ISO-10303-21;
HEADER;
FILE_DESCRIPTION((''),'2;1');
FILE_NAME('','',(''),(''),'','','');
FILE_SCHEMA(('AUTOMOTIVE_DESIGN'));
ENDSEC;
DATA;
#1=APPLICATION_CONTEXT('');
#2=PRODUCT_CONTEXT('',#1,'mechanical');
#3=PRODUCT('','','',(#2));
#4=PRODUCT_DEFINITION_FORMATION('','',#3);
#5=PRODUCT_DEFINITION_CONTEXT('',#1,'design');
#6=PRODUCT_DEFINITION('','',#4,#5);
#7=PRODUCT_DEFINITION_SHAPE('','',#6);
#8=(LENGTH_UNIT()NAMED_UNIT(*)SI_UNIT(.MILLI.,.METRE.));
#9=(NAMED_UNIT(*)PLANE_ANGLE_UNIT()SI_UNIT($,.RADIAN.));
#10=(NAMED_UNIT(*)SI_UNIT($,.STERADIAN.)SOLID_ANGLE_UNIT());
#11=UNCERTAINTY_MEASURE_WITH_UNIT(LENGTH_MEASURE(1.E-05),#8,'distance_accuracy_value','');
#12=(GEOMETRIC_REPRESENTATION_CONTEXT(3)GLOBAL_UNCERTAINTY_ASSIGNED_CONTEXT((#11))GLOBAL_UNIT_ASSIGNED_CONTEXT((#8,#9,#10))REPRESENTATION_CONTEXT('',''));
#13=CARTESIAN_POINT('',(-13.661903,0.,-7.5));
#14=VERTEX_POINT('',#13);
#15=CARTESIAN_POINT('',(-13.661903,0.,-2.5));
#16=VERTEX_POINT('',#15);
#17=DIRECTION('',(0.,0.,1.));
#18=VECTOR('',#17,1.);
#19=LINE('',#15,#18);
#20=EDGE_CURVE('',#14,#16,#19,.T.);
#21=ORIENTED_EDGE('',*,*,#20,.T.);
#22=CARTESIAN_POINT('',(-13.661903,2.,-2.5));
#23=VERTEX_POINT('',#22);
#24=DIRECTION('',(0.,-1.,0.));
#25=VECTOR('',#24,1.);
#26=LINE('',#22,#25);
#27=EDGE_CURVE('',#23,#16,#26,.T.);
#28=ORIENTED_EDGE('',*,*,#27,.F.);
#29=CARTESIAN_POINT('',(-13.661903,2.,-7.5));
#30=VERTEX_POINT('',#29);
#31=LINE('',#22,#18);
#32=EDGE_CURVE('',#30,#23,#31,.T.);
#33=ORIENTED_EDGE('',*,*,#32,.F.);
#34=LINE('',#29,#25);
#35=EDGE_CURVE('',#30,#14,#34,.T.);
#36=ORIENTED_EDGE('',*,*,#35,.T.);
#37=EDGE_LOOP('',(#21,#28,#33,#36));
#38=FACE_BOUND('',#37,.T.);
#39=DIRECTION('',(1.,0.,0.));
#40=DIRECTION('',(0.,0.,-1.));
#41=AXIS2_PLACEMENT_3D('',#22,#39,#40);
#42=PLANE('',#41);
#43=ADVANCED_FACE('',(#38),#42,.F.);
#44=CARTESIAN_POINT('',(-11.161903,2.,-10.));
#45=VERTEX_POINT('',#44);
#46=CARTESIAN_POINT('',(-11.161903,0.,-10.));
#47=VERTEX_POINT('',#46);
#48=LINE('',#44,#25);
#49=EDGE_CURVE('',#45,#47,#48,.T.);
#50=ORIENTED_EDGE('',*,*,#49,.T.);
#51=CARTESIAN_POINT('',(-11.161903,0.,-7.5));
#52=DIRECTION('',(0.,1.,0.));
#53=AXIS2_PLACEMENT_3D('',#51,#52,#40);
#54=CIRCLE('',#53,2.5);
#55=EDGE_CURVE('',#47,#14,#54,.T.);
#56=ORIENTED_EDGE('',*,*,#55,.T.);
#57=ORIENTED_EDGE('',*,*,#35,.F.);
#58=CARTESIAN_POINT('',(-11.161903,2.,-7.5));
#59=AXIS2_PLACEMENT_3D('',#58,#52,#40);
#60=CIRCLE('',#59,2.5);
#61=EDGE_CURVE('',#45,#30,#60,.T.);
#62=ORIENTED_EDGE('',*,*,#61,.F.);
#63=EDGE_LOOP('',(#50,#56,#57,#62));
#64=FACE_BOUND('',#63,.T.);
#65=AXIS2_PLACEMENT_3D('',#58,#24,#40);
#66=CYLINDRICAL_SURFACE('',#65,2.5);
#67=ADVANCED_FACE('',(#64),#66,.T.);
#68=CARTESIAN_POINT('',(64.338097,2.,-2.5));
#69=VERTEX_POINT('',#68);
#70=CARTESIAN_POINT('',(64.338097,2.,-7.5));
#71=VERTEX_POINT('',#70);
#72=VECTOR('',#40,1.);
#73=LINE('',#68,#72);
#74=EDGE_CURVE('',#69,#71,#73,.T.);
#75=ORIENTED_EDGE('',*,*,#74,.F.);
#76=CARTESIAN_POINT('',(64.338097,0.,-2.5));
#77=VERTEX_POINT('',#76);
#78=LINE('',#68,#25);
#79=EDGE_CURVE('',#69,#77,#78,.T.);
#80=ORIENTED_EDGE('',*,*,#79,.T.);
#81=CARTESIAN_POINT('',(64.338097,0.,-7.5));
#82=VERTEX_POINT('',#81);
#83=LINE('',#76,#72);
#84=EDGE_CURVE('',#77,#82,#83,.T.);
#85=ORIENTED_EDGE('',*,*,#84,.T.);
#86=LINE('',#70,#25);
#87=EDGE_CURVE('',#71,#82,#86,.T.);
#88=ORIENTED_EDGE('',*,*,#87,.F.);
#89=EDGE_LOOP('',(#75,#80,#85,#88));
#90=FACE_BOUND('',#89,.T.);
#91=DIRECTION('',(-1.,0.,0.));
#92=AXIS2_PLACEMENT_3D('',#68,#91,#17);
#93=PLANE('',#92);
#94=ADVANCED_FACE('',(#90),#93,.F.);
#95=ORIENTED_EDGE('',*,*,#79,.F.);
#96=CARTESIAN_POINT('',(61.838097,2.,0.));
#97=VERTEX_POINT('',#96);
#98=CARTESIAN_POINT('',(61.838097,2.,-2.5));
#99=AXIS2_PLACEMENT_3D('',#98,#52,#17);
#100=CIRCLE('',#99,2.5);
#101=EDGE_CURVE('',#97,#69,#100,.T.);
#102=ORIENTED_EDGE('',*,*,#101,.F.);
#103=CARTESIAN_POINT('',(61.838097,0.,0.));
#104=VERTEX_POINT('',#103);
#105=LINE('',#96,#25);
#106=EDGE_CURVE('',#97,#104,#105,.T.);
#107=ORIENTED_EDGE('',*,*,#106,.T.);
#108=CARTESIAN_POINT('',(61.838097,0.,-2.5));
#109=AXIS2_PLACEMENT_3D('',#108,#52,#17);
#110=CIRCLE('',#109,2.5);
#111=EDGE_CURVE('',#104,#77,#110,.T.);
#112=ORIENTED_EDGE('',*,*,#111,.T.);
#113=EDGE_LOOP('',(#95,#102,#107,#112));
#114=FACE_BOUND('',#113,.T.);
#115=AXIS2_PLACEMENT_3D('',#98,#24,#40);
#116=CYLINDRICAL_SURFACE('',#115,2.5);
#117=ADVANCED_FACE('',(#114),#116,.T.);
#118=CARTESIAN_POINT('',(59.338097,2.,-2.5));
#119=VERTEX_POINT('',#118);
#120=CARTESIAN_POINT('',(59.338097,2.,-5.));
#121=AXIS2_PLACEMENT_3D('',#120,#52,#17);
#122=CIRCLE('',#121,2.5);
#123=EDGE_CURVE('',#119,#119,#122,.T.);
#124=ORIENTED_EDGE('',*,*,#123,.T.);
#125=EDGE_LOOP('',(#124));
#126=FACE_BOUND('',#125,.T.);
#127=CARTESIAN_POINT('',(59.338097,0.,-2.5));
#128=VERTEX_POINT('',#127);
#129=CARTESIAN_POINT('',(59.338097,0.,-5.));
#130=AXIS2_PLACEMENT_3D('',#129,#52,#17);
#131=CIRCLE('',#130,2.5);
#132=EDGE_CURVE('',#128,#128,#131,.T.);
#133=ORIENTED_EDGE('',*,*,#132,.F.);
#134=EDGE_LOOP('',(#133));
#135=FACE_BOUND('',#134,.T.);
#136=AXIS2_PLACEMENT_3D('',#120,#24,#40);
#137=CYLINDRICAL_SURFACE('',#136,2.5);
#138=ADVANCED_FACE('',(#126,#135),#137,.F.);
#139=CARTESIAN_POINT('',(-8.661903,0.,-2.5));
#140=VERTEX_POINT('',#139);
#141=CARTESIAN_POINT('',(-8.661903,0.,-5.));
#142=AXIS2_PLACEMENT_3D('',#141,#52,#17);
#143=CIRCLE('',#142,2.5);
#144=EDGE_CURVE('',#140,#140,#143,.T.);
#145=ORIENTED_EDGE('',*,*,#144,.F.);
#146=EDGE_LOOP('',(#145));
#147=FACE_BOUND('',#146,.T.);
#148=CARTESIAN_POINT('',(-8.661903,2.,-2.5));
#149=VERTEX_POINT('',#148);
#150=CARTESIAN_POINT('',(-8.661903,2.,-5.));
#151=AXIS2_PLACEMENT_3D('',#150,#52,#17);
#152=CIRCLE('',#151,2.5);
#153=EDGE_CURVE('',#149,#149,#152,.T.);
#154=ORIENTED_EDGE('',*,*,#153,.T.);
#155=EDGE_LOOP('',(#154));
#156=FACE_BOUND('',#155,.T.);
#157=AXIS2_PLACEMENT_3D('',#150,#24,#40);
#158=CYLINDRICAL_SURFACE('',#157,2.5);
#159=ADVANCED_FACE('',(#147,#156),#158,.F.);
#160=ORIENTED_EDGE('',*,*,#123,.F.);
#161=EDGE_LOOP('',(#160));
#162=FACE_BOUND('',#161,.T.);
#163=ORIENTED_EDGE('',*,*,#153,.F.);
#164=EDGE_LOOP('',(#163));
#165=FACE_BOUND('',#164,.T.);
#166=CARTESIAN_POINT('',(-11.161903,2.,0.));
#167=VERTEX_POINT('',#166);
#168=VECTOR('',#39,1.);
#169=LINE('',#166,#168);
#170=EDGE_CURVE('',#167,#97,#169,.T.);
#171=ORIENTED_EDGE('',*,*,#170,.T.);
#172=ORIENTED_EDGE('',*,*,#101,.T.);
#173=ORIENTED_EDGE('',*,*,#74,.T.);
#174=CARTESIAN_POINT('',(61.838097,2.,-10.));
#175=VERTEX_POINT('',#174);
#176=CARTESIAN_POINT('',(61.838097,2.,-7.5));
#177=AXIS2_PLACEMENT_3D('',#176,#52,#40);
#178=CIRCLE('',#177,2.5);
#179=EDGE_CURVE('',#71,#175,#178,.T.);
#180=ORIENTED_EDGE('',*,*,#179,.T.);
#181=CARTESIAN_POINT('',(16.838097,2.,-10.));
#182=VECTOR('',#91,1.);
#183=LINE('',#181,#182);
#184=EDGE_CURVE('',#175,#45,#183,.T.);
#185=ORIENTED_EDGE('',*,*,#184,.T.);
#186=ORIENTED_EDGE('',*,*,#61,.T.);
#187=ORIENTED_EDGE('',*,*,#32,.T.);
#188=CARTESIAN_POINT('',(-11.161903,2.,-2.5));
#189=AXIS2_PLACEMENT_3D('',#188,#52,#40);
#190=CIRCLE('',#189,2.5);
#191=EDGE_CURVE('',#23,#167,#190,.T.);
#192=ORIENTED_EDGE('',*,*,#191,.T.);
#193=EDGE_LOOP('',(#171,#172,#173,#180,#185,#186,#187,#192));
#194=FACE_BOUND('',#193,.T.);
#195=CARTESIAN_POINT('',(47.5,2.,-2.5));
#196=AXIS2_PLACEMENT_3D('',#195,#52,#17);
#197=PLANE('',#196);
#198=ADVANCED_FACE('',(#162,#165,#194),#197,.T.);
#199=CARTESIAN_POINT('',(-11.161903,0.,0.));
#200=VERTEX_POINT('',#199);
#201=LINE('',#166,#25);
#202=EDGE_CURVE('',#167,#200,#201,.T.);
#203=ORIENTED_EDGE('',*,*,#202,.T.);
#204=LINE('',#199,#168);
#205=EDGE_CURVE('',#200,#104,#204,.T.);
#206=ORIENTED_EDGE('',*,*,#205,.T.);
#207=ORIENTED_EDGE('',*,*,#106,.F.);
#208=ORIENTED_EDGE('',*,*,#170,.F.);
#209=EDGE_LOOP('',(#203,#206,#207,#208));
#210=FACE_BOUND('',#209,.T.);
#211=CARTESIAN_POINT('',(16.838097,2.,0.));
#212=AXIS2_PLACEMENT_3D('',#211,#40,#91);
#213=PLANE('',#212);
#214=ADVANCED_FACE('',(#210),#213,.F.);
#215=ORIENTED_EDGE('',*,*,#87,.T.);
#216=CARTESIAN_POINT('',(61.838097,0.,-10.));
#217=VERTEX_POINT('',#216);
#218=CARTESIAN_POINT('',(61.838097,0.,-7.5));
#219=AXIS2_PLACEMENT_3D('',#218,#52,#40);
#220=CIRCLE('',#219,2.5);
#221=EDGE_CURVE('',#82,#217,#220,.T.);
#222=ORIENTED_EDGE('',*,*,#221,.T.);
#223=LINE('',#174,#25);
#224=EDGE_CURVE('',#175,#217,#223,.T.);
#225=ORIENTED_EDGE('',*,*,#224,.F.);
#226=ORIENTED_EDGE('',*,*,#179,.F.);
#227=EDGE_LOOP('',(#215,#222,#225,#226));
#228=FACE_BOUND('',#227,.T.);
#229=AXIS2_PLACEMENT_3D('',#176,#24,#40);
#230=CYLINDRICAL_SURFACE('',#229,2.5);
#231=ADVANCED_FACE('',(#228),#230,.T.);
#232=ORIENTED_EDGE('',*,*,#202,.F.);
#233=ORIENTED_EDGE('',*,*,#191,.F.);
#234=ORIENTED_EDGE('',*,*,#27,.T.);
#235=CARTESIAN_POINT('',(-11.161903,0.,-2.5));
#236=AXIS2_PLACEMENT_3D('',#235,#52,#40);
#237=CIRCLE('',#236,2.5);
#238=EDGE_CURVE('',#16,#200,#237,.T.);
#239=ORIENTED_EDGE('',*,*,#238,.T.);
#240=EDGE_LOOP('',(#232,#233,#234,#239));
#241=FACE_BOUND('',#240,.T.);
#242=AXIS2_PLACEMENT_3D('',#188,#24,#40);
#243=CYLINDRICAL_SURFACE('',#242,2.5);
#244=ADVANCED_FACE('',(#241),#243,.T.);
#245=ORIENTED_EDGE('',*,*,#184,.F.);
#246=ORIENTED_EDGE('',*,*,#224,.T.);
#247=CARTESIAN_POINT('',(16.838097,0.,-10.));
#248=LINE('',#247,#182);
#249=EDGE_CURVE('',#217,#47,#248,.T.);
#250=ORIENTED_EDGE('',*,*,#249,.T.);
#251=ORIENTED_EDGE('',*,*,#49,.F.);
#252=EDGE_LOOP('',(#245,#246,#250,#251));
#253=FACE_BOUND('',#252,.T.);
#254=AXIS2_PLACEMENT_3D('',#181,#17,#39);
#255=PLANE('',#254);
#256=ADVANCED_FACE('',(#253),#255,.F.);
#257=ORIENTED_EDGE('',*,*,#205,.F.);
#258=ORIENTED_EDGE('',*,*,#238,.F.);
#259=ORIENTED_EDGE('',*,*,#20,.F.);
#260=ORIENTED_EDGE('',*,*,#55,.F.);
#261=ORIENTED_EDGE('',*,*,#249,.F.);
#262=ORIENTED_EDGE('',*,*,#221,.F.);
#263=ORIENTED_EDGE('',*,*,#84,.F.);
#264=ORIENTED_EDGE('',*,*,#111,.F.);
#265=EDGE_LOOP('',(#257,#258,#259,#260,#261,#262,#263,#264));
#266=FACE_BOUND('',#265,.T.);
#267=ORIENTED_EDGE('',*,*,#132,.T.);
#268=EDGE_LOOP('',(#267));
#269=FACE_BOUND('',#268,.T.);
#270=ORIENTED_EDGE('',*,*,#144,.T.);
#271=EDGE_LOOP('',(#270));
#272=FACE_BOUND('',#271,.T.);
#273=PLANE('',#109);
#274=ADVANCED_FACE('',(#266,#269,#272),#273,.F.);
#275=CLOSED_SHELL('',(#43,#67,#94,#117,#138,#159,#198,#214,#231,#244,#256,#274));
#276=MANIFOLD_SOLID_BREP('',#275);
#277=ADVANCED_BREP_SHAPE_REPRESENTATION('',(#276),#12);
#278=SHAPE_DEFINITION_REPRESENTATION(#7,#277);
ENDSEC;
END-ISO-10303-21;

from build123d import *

# Parameters (mm, degrees)
SKETCH1_R           = 2.5
BOSS_EXTRUDE2_DEPTH = 2
FLEX1_OUTLINE_R     = 2.5
FLEX1_DEPTH         = 2


# Read off the part's stored shape, not the designer's step: Flex1
with BuildPart() as part:
    # Sketch1 → Boss-Extrude2 (new body)
    with BuildSketch(Plane(origin=(0, 0, 0), x_dir=(1, 0, 0), z_dir=(0, 1, 0))):
        with BuildLine():
            Line((2.5, 0), (47.5, 0))
            ThreePointArc((47.5, 0), (49.267766953, 0.732233047), (50, 2.5))
            Line((50, 2.5), (50, 7.5))
            ThreePointArc((50, 7.5), (49.267766953, 9.267766953), (47.5, 10))
            Line((47.5, 10), (2.5, 10))
            ThreePointArc((2.5, 10), (0.732233047, 9.267766953), (0, 7.5))
            Line((0, 7.5), (0, 2.5))
            ThreePointArc((0, 2.5), (0.732233047, 0.732233047), (2.5, 0))
        make_face()
        with Locations(Location((5, 5, 0), (0, 0, 270))):
            Circle(SKETCH1_R, mode=Mode.SUBTRACT)
        with Locations(Location((45, 5, 0), (0, 0, 270))):
            Circle(SKETCH1_R, mode=Mode.SUBTRACT)
    extrude(amount=BOSS_EXTRUDE2_DEPTH)

    # Flex1 outline → Flex1 (add)
    # profile 1 of 4: a face of its own
    with BuildSketch(Plane(origin=(0, 0, 0), x_dir=(1, 0, 0), z_dir=(0, 1, 0))):
        with BuildLine():
            Line((2.5, 10), (-11.161902987, 10))
            ThreePointArc((-11.161902987, 10), (-12.92966994, 9.267766953), (-13.661902987, 7.5))
            Line((-13.661902987, 7.5), (-13.661902987, 2.5))
            ThreePointArc((-13.661902987, 2.5), (-12.92966994, 0.732233047), (-11.161902987, 0))
            Line((-11.161902987, 0), (2.5, 0))
            ThreePointArc((2.5, 0), (0.732233047, 0.732233047), (0, 2.5))
            Line((0, 2.5), (0, 7.5))
            ThreePointArc((0, 7.5), (0.732233047, 9.267766953), (2.5, 10))
        make_face()
        with Locations((-8.661902987, 5)):
            Circle(FLEX1_OUTLINE_R, mode=Mode.SUBTRACT)
    # profile 2 of 4: a face of its own
    with BuildSketch(Plane(origin=(0, 0, 0), x_dir=(1, 0, 0), z_dir=(0, 1, 0))):
        with BuildLine():
            Line((61.838097013, 10), (47.5, 10))
            ThreePointArc((47.5, 10), (49.267766953, 9.267766953), (50, 7.5))
            Line((50, 7.5), (50, 2.5))
            ThreePointArc((50, 2.5), (49.267766953, 0.732233047), (47.5, 0))
            Line((47.5, 0), (61.838097013, 0))
            ThreePointArc((61.838097013, 0), (63.605863966, 0.732233047), (64.338097013, 2.5))
            Line((64.338097013, 2.5), (64.338097013, 7.5))
            ThreePointArc((64.338097013, 7.5), (63.605863966, 9.267766953), (61.838097013, 10))
        make_face()
        with Locations((59.338097013, 5)):
            Circle(FLEX1_OUTLINE_R, mode=Mode.SUBTRACT)
    # profile 3 of 4: a face of its own
    with BuildSketch(Plane(origin=(0, 0, 0), x_dir=(1, 0, 0), z_dir=(0, 1, 0))):
        with Locations((5, 5)):
            Circle(FLEX1_OUTLINE_R)
    # profile 4 of 4: a face of its own
    with BuildSketch(Plane(origin=(0, 0, 0), x_dir=(1, 0, 0), z_dir=(0, 1, 0))):
        with Locations((45, 5)):
            Circle(FLEX1_OUTLINE_R)
    extrude(amount=FLEX1_DEPTH)


solid = part.part
